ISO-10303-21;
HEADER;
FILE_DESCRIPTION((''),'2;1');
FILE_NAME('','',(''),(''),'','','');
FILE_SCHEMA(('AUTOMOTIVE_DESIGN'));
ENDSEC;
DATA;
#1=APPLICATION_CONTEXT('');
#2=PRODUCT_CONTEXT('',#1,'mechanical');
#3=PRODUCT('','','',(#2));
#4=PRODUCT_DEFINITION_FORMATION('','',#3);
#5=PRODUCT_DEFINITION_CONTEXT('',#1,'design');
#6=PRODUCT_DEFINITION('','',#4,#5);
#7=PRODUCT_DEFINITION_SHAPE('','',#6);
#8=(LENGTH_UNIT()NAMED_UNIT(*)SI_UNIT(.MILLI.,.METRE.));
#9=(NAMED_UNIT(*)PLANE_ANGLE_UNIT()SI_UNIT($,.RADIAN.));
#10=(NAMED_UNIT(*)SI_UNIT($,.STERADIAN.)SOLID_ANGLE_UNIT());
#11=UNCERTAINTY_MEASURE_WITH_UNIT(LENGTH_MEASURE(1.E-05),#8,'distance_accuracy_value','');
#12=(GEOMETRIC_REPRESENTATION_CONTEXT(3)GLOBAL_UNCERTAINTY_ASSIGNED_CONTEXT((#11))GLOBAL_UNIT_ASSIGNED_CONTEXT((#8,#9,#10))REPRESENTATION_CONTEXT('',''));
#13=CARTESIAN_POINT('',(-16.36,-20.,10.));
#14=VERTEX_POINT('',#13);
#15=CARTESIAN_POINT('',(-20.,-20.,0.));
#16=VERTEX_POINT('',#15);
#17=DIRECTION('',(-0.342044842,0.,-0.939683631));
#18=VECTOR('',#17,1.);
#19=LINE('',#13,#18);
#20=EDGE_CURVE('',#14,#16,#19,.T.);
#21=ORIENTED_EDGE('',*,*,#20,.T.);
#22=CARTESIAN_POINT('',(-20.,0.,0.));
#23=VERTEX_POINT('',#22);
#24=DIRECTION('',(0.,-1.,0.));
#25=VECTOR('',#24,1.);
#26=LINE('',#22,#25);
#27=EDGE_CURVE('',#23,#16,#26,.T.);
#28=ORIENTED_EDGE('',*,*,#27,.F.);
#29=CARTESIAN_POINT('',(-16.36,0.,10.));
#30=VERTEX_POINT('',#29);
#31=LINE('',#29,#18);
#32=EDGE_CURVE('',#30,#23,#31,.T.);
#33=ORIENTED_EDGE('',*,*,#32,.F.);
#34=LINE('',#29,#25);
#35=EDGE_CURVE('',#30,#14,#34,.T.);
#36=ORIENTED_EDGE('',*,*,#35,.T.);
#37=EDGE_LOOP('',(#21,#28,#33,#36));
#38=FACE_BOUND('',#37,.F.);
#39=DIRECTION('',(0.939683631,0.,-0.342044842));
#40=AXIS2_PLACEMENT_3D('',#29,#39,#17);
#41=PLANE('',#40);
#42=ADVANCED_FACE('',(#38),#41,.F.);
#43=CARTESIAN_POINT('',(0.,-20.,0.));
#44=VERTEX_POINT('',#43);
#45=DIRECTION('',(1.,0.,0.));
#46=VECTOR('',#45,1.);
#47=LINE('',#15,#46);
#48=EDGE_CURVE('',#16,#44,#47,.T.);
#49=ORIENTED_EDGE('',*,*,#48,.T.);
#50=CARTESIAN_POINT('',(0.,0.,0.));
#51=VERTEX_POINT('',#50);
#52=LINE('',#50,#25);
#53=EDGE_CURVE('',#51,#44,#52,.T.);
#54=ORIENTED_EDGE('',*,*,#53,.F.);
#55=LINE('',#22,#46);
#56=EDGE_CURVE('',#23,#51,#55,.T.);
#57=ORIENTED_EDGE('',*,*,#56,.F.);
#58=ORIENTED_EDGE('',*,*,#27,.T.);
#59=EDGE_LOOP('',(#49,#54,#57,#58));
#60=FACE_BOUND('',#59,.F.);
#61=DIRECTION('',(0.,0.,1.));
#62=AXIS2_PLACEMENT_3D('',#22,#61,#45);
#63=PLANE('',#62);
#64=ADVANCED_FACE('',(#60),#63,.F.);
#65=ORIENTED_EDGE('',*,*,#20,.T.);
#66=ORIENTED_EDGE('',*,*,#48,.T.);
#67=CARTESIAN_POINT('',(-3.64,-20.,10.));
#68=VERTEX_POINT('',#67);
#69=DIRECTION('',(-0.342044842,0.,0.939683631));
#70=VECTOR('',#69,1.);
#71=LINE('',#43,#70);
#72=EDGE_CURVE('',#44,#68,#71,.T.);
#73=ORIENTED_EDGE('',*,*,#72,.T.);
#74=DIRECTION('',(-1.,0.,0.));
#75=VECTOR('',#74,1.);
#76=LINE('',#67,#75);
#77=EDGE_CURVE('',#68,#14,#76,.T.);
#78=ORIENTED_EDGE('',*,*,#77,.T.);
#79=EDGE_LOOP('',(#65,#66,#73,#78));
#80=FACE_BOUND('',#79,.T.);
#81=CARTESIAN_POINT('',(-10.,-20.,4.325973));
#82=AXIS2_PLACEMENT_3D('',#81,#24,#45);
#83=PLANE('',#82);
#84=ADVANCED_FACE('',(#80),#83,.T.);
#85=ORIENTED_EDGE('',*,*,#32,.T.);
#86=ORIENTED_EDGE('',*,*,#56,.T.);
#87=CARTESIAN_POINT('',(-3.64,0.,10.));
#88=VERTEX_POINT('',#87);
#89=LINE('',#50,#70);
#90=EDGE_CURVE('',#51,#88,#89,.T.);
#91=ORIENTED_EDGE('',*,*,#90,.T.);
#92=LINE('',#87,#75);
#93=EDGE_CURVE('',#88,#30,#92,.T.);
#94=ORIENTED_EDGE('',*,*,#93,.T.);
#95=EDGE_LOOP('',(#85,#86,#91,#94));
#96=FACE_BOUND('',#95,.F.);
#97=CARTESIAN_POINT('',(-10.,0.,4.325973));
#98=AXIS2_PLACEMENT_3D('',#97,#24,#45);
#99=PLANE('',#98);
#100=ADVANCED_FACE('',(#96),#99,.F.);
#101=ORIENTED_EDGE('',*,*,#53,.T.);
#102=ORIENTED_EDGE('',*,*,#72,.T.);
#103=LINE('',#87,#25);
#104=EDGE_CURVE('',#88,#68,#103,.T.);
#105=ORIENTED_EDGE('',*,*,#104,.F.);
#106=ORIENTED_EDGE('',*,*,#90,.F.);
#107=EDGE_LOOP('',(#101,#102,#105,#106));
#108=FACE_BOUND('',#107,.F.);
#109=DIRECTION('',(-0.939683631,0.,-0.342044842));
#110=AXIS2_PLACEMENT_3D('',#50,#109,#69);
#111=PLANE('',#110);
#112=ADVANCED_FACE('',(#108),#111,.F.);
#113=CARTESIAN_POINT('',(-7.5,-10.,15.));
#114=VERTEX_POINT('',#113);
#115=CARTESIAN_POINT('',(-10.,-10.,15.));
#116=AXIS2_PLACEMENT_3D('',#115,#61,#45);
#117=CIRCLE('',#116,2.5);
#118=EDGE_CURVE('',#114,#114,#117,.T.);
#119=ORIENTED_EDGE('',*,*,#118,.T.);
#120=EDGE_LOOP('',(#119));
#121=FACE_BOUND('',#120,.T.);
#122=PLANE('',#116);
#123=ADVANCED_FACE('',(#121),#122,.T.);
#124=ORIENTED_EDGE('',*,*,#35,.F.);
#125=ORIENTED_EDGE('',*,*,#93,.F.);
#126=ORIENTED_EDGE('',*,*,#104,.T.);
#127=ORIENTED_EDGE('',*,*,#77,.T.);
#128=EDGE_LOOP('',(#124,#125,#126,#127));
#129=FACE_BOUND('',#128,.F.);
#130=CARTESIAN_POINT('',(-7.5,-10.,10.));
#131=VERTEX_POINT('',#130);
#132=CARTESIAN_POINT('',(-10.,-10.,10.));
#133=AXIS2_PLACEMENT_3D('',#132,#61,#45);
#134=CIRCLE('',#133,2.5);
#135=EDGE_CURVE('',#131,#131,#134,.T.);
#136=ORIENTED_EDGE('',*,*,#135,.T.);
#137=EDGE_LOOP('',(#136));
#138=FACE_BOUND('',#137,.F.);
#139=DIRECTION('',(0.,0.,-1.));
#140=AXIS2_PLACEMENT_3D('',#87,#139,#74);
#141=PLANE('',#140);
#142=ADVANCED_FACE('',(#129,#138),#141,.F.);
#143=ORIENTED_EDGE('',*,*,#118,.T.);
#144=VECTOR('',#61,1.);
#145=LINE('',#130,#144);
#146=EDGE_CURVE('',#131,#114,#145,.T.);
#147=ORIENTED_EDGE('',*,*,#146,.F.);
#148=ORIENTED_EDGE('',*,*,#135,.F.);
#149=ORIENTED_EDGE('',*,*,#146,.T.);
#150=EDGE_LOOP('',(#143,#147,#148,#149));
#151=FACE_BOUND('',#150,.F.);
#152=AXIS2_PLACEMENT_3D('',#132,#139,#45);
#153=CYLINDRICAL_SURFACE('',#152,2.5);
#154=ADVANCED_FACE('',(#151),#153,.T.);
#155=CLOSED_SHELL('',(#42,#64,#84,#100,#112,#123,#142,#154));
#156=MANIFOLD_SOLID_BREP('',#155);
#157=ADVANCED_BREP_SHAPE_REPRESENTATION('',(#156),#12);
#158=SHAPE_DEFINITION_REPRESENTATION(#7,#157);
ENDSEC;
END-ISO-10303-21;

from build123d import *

# Parameters (mm, degrees)
F1_DEPTH = 20
F2_R     = 2.5
F3_DEPTH = 5


# Not quite as in the source:
# - a feature names something its author has since deleted; it is built from what else it names


with BuildPart() as f1:
    # F0 (on Front) → F1 (new body)
    with BuildSketch(Plane.XZ):
        Polygon((-20, 0), (0, 0), (-3.64, 10), (-16.36, 10), align=None)
    extrude(amount=F1_DEPTH)

    # F2 (on face) → F3 (join)
    with BuildSketch(Plane.XY.offset(10)):
        with Locations((-10, -10)):
            Circle(F2_R)
    extrude(amount=F3_DEPTH)


solid = f1.part
